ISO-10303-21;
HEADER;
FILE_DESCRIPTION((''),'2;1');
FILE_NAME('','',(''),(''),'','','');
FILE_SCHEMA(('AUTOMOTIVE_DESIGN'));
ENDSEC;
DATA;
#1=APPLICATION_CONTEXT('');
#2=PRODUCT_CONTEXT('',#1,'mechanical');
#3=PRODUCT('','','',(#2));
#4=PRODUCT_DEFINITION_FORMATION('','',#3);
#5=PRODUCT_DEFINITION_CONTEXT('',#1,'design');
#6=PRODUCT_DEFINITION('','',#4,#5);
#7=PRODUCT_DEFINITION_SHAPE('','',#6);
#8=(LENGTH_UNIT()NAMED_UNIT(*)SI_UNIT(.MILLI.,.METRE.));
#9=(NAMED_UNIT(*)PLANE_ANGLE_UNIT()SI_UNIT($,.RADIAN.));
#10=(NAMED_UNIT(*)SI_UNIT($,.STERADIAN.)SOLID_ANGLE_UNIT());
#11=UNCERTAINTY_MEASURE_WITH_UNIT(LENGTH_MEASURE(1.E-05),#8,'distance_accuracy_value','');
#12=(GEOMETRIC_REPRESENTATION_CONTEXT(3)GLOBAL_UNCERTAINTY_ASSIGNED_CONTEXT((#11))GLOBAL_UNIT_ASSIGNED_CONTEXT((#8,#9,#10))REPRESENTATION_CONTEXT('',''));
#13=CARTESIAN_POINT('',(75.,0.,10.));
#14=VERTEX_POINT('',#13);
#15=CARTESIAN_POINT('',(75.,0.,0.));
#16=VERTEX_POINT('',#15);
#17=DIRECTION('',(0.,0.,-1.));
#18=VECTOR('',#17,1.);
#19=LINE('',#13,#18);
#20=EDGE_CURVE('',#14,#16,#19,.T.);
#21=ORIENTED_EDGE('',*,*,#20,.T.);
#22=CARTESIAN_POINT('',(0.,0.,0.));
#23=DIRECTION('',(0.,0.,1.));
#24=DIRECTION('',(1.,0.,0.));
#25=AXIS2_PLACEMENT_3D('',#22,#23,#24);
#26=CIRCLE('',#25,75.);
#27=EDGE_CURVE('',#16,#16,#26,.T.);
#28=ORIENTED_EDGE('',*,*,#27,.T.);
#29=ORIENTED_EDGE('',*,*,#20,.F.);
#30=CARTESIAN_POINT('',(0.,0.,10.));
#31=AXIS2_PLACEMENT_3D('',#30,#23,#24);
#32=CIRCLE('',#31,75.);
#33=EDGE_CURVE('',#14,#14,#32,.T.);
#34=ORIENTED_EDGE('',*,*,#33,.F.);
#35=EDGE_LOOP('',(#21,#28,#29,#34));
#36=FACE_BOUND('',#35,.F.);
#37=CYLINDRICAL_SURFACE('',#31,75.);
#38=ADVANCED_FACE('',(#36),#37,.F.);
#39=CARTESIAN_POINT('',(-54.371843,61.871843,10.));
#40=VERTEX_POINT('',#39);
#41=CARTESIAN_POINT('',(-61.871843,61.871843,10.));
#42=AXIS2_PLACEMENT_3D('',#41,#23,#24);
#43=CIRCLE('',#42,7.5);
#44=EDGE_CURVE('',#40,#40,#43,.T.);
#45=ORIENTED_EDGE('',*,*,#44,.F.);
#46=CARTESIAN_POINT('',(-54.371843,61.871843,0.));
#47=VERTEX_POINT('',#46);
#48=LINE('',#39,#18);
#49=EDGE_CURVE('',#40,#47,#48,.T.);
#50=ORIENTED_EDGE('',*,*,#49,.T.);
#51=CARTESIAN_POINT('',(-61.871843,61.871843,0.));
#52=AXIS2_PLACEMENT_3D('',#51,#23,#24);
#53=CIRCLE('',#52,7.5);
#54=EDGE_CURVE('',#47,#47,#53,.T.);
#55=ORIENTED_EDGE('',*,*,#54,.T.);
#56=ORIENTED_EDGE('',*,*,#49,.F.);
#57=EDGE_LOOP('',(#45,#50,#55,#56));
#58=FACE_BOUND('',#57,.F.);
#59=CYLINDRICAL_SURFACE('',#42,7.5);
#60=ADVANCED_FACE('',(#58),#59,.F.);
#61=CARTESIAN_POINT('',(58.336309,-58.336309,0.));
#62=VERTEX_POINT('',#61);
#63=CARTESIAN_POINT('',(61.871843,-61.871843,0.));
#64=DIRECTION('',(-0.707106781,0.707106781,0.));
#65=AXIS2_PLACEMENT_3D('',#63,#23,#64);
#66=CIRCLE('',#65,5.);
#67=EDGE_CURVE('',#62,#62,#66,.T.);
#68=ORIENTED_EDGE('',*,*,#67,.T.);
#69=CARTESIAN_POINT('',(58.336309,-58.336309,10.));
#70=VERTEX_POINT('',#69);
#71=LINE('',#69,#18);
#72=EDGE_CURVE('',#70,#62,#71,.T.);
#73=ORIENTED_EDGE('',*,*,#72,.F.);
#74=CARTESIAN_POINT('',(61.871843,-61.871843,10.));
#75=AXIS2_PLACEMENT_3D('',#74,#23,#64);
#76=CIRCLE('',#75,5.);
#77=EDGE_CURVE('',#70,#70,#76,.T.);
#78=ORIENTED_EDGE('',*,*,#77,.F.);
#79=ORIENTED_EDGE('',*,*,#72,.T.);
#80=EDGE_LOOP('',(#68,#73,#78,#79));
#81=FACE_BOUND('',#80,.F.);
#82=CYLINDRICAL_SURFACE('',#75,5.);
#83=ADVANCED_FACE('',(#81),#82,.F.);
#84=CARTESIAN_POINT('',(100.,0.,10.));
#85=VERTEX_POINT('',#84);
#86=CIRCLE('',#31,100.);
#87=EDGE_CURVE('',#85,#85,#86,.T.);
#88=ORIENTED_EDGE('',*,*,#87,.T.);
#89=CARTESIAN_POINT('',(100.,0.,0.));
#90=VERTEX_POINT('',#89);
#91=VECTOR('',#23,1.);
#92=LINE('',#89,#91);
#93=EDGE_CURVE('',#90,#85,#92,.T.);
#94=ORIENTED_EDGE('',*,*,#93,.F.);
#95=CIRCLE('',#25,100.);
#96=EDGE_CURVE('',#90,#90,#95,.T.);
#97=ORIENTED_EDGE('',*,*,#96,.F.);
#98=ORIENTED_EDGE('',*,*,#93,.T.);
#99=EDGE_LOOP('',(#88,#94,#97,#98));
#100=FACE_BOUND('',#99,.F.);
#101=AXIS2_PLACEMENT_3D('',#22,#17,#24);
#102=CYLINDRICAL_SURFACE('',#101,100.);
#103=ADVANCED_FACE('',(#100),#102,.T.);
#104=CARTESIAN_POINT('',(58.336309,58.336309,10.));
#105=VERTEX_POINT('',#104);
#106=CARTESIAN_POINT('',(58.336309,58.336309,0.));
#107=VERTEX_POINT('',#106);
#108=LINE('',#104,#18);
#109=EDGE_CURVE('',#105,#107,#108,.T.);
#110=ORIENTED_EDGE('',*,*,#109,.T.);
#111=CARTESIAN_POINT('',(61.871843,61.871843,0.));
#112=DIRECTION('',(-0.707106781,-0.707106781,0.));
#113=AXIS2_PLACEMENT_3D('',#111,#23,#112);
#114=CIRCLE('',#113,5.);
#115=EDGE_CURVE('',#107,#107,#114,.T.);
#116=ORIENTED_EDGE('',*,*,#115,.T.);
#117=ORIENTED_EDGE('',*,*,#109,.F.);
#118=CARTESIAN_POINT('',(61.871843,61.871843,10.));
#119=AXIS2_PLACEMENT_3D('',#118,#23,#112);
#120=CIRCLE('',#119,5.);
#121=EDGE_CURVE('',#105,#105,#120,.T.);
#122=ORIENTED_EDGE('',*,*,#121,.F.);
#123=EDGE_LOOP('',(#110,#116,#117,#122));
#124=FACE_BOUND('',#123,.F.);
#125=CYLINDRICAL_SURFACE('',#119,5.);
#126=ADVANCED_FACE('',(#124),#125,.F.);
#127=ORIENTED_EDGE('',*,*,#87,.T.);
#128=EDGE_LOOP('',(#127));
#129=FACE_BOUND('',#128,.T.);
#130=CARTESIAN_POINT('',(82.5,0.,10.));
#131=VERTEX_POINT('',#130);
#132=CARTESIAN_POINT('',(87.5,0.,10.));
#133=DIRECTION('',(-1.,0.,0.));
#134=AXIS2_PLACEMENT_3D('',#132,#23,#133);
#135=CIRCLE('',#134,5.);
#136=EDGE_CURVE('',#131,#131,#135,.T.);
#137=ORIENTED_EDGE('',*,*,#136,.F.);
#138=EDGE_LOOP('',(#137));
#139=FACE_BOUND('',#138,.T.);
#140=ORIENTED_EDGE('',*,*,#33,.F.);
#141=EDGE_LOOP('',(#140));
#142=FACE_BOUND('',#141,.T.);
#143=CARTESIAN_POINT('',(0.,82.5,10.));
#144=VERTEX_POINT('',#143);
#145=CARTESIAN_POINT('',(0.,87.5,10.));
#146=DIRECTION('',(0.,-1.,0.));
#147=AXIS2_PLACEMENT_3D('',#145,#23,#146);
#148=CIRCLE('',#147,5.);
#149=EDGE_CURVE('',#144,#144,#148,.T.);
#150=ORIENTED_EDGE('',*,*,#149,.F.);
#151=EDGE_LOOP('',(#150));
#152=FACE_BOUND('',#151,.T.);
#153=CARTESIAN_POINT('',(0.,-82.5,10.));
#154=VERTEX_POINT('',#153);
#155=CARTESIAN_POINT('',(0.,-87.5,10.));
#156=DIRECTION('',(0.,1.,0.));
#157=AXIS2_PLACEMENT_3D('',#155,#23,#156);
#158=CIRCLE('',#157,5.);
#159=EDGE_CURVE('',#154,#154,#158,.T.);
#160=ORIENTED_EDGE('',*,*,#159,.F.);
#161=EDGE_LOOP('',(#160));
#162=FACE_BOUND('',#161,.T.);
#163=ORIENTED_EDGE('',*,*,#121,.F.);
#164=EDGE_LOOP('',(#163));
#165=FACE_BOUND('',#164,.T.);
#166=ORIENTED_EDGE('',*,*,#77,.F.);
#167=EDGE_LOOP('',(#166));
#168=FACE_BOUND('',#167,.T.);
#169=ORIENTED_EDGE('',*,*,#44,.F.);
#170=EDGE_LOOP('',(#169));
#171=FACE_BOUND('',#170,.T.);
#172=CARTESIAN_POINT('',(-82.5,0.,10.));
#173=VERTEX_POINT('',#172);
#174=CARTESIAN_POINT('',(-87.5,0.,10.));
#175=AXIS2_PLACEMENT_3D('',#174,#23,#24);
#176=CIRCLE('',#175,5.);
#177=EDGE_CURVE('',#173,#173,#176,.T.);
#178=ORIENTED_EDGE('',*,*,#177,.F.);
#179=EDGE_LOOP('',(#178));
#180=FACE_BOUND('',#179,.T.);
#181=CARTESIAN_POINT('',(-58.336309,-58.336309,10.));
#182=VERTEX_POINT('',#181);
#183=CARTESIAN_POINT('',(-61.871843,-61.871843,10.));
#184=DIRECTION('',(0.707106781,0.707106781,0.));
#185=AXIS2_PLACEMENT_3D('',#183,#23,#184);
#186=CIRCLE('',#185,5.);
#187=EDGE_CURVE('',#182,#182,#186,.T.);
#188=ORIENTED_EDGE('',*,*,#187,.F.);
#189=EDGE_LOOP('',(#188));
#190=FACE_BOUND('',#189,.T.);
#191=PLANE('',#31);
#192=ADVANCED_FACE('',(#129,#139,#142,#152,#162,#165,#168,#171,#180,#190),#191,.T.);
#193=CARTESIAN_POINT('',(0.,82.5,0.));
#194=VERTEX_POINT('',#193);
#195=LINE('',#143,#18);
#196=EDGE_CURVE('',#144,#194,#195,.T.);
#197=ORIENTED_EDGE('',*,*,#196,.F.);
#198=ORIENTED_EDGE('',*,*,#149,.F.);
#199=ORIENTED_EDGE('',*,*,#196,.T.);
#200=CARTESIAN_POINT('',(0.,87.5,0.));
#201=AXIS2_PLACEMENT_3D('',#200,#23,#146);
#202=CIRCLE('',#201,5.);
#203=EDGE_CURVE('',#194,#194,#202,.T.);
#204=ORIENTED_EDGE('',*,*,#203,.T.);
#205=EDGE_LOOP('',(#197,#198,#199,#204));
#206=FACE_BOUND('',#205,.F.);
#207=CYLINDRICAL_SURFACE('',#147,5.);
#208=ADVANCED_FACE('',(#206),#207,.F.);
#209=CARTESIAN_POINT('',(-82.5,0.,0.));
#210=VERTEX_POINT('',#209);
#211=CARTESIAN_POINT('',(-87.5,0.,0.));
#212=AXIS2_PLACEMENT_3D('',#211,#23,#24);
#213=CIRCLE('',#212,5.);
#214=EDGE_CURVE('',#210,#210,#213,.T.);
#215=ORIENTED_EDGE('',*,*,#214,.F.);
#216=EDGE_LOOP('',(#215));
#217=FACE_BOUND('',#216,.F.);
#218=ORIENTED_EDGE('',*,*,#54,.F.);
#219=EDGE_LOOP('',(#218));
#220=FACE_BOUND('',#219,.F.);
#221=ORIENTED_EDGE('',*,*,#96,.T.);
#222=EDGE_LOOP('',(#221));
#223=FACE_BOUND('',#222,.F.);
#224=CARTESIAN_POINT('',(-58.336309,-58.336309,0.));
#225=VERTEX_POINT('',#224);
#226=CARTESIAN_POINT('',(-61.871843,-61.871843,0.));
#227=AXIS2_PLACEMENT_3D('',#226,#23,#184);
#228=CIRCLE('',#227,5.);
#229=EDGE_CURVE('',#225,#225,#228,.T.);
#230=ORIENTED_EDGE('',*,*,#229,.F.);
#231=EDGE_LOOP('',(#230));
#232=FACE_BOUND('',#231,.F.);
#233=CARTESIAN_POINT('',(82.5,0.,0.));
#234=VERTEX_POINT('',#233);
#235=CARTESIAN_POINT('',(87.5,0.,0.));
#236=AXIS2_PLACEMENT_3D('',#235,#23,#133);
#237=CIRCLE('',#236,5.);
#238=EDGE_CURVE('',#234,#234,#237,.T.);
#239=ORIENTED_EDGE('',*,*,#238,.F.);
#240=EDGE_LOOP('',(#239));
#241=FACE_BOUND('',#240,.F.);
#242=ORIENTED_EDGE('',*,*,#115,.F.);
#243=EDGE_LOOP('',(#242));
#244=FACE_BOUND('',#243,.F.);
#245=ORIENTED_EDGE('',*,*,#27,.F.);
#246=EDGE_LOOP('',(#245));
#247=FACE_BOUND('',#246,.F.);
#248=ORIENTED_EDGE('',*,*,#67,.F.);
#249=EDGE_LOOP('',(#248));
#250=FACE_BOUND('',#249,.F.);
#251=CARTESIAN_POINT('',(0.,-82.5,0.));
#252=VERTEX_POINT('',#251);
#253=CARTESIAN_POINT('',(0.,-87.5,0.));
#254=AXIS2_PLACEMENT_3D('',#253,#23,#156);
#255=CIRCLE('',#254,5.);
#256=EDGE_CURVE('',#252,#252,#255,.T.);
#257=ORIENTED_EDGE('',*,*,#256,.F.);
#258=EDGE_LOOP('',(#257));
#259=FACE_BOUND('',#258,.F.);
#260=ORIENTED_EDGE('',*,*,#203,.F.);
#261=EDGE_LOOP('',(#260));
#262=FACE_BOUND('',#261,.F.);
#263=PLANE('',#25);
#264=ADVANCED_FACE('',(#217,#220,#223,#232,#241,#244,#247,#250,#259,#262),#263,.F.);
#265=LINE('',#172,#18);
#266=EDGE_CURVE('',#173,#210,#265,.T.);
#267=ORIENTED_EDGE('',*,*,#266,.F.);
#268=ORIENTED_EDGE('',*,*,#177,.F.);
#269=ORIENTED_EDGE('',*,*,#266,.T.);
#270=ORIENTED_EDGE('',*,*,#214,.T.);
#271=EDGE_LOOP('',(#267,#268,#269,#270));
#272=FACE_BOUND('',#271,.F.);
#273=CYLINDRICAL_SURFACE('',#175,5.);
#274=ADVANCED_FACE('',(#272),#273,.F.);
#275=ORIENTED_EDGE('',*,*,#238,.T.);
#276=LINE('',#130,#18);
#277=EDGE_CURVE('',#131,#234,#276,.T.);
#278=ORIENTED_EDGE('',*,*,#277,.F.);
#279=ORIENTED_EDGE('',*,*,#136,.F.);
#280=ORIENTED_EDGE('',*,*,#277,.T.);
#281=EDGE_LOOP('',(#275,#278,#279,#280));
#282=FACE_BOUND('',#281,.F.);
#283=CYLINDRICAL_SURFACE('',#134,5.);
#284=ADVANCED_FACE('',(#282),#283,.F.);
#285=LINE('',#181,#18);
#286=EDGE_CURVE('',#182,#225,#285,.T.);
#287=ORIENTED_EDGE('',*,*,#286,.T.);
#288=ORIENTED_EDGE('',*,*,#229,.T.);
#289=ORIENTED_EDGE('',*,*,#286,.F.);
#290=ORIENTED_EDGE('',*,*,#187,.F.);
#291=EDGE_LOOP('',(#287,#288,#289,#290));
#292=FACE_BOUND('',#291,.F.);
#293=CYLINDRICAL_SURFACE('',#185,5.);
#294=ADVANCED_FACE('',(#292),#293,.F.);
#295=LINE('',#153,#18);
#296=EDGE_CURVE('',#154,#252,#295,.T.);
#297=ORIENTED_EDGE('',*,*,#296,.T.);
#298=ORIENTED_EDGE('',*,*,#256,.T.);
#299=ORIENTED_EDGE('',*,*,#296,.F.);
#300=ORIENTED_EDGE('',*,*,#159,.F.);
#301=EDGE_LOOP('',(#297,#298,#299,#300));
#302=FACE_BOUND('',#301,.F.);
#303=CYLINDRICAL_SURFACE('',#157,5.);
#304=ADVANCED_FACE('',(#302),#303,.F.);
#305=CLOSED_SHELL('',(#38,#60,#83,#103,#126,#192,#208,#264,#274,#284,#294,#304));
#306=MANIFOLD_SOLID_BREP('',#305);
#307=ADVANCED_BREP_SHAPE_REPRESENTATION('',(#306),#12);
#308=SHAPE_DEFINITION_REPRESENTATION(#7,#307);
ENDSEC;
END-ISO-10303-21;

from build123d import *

# Parameters (mm, degrees)
F0_R            = 100
F1_DEPTH        = 10
F2_R            = 75
F3_DEPTH        = 10.001
F4_R            = 5
F5_DEPTH        = 10.001
F5_COPIES_COUNT = 7
F5_COPIES_ANGLE = 270
F8_R            = 7.5
F9_DEPTH        = 10.001


# Not quite as in the source:
# - a pattern or mirror of a feature is missing from the dataset's text; its kind, count and spacing are read off the source's solid


with BuildPart() as f1:
    # F0 (on Top) → F1 (new body)
    with BuildSketch(Plane.XY):
        Circle(F0_R)
    extrude(amount=F1_DEPTH)

    # F2 (on face) → F3 (cut, through all)
    with BuildSketch(Plane.XY.offset(10)):
        Circle(F2_R)
    extrude(amount=-F3_DEPTH, mode=Mode.SUBTRACT)

    # F4 (on face) → F5 (cut, through all)
    with BuildSketch(Plane.XY.offset(10)):
        with Locations((-87.5, 0)):
            Circle(F4_R)
    f5 = extrude(amount=-F5_DEPTH, mode=Mode.SUBTRACT)

    # F5_copies: F5 ×7 about axis
    f5_copies_axis = Axis((0, 0, 0), (0, 0, 1))
    for i in range(1, F5_COPIES_COUNT):
        add(f5.rotate(f5_copies_axis, i * F5_COPIES_ANGLE / (F5_COPIES_COUNT - 1)), mode=Mode.SUBTRACT)

    # F8 (on face) → F9 (cut, through all)
    with BuildSketch(Plane.XY.offset(10)):
        with Locations((-61.8718433538, 61.8718433538)):
            Circle(F8_R)
    extrude(amount=-F9_DEPTH, mode=Mode.SUBTRACT)


solid = f1.part
